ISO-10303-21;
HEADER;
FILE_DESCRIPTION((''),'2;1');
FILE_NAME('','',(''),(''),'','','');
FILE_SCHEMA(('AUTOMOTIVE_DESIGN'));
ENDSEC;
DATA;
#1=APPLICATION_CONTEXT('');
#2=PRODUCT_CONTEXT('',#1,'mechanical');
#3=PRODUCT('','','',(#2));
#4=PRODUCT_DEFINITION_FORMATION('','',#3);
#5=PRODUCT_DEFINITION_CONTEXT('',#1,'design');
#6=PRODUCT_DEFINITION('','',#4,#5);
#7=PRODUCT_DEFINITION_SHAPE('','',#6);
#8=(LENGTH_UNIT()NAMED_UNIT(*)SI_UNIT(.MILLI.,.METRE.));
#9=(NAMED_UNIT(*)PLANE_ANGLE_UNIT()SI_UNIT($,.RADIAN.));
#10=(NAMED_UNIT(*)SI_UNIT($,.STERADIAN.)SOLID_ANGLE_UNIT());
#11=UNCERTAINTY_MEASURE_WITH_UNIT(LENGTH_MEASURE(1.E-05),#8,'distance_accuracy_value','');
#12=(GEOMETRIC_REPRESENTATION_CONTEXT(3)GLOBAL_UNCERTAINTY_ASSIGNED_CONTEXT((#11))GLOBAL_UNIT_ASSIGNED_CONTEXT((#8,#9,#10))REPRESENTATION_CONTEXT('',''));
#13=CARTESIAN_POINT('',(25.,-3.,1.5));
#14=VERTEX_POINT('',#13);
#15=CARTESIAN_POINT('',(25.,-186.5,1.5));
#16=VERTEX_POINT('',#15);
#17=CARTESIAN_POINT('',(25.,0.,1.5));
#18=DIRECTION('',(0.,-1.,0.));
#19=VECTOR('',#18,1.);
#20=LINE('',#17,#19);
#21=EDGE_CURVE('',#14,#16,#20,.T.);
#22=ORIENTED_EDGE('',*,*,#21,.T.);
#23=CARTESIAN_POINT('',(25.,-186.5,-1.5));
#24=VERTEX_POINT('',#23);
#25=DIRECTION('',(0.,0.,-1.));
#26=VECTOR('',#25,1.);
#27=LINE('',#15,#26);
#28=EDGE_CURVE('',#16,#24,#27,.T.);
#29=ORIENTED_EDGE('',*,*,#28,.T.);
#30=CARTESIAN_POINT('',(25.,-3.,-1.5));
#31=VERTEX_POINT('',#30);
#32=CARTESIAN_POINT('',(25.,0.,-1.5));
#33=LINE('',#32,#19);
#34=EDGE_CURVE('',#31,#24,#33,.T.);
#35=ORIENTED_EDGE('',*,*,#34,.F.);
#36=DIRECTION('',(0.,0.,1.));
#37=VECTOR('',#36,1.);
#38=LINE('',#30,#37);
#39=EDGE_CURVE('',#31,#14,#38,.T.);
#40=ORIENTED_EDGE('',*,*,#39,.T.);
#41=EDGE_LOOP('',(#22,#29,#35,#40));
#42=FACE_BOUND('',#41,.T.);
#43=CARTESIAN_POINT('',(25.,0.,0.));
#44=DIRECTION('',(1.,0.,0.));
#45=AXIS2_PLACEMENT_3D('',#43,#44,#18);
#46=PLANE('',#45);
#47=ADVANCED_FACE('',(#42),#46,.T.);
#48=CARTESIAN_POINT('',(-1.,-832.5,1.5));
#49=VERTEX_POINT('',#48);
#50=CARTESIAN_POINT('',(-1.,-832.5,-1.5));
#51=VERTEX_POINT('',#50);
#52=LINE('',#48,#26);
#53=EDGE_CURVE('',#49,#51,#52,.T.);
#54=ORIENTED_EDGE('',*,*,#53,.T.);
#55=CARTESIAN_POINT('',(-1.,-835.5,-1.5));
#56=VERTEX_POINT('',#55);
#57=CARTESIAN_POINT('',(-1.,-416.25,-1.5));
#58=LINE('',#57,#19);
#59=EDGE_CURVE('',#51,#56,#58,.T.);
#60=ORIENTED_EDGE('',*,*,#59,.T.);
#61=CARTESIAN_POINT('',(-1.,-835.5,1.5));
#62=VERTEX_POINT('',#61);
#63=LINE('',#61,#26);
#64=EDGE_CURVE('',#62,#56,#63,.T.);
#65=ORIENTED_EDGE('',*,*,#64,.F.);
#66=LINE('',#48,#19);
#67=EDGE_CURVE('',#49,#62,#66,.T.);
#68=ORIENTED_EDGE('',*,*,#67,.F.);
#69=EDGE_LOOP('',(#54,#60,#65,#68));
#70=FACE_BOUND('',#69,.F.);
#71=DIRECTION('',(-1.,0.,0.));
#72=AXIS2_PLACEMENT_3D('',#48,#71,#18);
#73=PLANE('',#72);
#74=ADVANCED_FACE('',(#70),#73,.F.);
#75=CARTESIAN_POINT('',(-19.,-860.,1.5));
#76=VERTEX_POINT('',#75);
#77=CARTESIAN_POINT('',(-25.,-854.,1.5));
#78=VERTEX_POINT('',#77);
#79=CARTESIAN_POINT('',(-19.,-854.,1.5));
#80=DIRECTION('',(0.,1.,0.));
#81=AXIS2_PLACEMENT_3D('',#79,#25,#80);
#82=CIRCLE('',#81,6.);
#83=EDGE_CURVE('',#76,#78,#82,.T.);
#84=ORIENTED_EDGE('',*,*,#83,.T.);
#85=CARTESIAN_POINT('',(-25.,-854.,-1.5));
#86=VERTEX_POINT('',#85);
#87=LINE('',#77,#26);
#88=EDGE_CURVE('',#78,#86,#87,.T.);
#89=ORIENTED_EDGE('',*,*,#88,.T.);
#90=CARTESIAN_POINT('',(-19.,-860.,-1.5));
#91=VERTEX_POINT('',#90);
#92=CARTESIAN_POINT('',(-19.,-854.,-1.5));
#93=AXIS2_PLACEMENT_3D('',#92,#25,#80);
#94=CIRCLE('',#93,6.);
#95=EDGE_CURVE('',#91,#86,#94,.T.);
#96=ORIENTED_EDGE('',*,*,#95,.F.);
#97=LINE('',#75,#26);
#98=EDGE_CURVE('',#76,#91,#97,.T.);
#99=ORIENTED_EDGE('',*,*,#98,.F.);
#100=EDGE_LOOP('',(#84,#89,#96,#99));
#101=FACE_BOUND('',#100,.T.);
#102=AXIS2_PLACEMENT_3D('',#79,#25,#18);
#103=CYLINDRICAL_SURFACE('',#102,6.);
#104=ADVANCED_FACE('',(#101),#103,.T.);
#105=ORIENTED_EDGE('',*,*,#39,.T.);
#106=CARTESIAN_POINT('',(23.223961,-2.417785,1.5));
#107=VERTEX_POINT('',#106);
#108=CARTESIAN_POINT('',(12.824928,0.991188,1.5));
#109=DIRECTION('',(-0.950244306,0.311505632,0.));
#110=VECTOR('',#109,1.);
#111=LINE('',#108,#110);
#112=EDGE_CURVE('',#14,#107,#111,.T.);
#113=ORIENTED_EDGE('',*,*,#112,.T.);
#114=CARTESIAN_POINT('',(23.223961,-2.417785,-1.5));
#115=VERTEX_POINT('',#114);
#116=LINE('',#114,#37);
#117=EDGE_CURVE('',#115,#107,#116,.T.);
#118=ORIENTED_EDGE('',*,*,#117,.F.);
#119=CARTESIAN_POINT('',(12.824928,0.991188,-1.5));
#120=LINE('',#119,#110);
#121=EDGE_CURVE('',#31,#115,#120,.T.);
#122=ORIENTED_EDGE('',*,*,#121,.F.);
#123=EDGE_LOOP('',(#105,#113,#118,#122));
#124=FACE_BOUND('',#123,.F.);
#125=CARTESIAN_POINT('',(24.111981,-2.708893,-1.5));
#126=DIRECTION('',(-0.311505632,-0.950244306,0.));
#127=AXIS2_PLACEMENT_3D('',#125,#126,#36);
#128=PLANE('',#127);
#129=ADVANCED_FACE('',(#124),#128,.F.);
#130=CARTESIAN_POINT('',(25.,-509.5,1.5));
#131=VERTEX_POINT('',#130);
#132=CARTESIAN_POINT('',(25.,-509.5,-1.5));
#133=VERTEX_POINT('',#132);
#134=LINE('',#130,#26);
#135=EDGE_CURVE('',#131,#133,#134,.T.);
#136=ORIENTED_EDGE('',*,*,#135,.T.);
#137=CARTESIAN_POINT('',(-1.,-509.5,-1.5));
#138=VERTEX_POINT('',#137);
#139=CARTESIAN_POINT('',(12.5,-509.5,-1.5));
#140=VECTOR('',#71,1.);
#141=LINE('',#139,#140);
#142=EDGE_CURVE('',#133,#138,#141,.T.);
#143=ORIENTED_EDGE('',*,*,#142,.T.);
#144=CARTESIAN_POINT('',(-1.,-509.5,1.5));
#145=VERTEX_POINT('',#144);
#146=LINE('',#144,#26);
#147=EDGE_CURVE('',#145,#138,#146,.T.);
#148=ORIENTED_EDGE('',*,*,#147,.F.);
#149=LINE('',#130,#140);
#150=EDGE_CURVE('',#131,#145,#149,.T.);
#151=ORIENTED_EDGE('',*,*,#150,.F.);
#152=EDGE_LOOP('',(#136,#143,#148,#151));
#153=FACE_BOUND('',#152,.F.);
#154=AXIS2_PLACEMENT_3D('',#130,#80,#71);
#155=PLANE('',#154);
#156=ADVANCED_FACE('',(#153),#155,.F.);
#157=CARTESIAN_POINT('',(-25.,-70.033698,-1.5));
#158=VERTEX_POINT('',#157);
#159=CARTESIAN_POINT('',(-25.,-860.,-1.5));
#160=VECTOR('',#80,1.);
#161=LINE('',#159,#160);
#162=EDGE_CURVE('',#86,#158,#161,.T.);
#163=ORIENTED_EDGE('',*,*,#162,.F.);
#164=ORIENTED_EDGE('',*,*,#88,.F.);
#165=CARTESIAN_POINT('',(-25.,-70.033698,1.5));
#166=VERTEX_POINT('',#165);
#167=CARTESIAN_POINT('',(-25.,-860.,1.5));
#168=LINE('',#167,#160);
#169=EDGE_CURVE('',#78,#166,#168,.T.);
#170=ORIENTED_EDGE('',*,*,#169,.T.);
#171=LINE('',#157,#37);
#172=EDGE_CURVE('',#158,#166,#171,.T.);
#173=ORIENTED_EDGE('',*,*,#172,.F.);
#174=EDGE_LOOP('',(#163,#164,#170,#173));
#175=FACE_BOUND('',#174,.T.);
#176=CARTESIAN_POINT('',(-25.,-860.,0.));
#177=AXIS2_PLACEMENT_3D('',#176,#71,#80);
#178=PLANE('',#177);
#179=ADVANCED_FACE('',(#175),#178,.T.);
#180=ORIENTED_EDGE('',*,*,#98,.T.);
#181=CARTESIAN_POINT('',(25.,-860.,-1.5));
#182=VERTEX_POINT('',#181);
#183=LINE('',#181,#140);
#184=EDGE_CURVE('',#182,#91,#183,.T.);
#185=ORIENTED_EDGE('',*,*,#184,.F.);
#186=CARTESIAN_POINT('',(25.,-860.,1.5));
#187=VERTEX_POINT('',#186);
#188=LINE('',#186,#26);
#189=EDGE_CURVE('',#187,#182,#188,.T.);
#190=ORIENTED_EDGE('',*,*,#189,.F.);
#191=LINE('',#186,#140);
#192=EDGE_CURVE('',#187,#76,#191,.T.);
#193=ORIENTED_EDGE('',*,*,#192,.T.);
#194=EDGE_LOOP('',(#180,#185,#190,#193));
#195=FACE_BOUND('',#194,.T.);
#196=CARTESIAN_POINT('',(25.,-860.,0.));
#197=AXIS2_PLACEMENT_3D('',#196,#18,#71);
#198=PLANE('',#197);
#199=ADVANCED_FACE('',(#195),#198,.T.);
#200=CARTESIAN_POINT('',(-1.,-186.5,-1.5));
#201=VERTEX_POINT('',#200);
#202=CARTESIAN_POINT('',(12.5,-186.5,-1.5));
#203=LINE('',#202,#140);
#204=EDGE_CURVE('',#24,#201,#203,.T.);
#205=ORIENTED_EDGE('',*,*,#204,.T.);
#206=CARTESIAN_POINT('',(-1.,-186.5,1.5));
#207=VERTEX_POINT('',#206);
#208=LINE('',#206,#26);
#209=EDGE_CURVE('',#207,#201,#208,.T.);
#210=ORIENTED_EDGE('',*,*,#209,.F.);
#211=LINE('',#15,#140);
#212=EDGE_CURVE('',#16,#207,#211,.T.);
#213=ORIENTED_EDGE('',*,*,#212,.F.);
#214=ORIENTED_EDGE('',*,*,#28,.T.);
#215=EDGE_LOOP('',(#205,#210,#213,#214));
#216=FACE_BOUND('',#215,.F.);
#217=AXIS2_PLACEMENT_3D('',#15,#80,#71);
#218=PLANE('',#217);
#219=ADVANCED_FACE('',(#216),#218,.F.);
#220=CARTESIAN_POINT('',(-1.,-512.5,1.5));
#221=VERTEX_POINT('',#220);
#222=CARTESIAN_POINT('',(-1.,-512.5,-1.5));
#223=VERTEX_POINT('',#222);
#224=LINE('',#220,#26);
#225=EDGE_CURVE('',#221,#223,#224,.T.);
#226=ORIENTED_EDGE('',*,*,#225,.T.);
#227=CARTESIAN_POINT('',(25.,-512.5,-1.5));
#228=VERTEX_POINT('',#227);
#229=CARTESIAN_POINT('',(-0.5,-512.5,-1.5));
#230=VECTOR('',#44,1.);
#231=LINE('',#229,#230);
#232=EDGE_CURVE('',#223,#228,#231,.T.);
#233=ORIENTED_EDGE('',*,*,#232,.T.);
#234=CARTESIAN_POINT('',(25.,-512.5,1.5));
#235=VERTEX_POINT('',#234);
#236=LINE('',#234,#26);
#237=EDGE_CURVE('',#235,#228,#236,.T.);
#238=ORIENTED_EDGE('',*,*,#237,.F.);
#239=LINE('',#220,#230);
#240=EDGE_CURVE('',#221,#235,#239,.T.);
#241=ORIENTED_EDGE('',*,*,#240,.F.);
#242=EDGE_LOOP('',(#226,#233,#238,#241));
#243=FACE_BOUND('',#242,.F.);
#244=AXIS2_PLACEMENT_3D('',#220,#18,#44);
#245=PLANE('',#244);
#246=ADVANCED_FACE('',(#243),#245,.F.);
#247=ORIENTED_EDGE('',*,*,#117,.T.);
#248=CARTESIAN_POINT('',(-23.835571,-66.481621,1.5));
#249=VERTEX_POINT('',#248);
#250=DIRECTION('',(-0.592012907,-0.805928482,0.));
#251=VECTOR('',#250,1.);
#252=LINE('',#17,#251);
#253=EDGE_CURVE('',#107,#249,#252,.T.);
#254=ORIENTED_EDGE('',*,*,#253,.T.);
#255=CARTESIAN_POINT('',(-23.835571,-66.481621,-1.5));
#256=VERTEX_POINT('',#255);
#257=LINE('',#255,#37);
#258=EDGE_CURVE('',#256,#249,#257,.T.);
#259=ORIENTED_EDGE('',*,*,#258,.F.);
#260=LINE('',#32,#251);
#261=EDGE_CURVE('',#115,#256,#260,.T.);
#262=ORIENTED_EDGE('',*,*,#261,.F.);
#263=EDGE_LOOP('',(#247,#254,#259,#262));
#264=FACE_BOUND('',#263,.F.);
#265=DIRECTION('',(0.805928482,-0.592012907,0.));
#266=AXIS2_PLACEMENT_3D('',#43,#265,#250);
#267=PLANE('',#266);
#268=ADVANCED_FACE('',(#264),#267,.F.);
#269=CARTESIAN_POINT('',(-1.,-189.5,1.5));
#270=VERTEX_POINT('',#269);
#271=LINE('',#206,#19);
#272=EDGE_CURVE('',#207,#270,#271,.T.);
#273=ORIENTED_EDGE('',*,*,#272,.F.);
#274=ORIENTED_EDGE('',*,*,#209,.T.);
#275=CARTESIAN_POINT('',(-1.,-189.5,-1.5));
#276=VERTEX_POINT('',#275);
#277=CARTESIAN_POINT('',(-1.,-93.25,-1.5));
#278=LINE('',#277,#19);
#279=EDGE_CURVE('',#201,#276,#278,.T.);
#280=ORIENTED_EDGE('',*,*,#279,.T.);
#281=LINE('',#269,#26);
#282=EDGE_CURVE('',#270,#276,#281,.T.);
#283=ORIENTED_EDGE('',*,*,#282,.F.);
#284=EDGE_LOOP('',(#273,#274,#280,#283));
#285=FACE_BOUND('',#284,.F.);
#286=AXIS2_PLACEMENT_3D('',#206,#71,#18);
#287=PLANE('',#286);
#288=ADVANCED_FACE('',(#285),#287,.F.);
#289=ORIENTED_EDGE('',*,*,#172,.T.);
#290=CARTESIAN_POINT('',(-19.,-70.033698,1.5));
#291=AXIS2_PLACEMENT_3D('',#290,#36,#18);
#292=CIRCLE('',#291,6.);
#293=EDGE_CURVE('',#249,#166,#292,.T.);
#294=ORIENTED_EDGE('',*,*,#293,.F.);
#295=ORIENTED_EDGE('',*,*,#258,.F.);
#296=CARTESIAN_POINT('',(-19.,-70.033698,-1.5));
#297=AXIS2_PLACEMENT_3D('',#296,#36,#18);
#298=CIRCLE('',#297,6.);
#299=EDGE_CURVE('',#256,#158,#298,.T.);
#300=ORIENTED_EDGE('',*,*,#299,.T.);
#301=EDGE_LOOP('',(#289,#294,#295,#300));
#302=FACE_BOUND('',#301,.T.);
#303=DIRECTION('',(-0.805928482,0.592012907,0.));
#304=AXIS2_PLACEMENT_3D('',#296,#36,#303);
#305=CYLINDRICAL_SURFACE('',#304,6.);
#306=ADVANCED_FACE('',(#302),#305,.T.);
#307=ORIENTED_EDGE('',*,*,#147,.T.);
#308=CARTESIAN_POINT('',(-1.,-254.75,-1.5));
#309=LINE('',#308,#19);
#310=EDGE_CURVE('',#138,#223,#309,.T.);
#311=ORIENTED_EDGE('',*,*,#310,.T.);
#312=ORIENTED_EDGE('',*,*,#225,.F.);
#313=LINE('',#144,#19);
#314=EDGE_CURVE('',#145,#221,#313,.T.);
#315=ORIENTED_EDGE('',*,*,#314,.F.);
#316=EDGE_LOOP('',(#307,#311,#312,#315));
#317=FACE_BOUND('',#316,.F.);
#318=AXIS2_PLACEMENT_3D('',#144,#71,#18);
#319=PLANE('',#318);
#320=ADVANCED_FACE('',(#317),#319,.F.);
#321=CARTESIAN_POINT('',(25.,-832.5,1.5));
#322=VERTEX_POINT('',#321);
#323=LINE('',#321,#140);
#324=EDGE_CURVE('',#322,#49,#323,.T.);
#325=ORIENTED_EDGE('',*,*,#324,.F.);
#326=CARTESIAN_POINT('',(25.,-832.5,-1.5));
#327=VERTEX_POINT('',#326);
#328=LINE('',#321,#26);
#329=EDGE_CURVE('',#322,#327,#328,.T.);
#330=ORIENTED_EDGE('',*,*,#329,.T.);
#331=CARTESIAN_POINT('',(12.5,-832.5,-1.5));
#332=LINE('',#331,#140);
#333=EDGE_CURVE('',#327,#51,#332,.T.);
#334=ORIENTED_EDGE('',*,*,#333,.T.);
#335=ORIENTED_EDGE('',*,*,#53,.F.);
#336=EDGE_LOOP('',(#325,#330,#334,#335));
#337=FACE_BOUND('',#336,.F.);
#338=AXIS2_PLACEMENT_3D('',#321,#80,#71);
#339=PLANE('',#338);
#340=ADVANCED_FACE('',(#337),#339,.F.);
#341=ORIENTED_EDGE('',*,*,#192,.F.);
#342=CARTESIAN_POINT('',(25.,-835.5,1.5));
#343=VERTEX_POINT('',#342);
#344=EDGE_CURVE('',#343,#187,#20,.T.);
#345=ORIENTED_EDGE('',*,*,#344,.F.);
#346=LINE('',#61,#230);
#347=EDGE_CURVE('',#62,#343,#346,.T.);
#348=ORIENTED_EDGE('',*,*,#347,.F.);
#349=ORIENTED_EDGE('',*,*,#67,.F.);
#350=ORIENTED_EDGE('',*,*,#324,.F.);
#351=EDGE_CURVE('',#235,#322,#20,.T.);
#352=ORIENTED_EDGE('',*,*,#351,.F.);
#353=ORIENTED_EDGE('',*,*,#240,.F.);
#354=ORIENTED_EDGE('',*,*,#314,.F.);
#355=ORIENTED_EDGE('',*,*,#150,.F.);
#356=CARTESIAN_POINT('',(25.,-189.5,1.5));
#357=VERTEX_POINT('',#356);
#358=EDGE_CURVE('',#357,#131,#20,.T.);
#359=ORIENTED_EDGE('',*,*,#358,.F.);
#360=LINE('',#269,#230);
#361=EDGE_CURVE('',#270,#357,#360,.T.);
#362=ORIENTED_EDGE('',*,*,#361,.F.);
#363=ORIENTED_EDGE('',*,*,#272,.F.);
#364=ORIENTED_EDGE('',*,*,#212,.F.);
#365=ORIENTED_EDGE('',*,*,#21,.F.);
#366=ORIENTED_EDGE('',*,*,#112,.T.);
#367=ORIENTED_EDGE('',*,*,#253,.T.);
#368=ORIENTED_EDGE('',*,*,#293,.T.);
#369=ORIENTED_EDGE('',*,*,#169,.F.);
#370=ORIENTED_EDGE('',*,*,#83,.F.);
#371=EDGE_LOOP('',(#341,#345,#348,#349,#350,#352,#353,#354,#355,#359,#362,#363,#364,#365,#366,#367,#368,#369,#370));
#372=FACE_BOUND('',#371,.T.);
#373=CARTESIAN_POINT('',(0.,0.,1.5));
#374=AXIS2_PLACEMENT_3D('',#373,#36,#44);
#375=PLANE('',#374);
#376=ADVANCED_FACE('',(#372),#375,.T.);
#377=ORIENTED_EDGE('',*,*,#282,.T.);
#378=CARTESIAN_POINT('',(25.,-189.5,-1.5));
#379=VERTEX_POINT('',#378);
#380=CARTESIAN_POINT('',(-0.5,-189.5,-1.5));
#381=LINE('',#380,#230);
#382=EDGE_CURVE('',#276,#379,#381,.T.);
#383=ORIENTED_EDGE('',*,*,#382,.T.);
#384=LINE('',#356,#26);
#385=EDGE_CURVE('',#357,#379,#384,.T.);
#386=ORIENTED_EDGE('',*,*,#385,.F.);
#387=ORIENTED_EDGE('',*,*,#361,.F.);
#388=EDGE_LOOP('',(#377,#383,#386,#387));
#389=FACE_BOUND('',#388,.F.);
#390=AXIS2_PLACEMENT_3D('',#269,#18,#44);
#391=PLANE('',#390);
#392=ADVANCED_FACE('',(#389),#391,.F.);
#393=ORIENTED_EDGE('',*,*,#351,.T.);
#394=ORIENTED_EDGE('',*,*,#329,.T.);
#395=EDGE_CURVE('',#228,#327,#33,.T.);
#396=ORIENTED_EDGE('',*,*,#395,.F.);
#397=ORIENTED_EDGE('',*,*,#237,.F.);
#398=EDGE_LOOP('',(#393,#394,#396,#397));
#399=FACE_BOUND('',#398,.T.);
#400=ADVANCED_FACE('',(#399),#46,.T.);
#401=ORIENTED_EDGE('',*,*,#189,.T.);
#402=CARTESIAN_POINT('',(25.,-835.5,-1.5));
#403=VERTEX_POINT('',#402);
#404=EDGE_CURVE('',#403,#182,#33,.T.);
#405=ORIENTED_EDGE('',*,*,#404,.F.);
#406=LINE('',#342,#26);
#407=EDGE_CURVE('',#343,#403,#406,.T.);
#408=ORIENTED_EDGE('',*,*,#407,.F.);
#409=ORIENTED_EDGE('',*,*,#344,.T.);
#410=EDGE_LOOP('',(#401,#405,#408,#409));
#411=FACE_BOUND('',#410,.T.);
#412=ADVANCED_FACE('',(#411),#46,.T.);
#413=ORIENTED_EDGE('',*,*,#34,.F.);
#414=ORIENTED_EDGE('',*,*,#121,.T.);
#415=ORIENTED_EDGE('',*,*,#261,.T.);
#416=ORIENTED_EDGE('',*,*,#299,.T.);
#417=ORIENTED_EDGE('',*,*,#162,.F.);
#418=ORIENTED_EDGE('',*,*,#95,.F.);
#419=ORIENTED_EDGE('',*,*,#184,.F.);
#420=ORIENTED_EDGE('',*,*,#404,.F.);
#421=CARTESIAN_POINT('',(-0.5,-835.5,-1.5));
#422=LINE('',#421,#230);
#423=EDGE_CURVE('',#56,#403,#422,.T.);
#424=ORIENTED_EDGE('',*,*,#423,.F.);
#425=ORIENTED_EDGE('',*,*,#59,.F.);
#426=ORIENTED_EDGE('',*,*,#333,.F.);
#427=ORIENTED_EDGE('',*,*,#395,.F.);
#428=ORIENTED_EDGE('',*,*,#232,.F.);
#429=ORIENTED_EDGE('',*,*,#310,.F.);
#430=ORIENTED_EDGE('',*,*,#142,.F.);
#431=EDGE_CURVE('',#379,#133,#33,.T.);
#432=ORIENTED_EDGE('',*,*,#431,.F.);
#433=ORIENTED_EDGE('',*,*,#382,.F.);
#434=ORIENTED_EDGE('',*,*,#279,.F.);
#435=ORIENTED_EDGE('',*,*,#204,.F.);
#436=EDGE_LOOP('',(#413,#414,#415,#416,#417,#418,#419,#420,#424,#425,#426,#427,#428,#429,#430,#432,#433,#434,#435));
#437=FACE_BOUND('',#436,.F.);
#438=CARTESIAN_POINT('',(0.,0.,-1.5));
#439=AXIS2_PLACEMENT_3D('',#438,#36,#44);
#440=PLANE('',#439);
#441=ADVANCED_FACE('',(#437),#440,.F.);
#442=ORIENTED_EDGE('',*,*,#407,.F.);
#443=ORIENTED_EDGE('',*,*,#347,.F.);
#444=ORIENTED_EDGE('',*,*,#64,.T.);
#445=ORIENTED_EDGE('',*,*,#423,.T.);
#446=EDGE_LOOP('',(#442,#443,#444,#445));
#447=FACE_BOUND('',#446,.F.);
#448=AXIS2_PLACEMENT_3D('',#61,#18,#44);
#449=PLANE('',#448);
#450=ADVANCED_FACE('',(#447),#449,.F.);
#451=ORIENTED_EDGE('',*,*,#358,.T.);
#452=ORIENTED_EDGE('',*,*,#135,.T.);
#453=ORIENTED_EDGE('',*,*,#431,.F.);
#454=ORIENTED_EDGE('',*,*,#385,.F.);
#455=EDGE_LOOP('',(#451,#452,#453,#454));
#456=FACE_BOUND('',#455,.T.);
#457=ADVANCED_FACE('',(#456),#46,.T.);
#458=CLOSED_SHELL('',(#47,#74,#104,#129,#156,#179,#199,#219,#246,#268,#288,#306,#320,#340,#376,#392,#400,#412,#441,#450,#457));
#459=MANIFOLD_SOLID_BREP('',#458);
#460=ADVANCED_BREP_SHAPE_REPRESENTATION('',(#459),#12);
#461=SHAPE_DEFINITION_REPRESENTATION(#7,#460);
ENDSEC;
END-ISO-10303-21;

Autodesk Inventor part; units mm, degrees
ref_plane "YZ Plane" through (0, 0, 0) normal (1, 0, 0) x (0, 1, 0)
ref_plane "XZ Plane" through (0, 0, 0) normal (0, 1, 0) x (-1, 0, 0)
ref_plane "XY Plane" through (0, 0, 0) normal (0, 0, 1) x (1, 0, 0)
sketch "Sketch1" plane through (0, 0, 0) normal (0, 0, 1) x (1, 0, 0)
  line L0 (-25, 0) -> (25, 0)
  line L1 (25, 0) -> (25, -860)
  line L2 (25, -860) -> (-25, -860)
  line L3 (-25, -860) -> (-25, 0)
  line L4 (25, 0) -> (-25, -68.0668)
  point P0 (0, 0)
  point P1 (0, 0)
  point P2 (25, -1153.2713)
  dimension "d0" = 50
  dimension "d1" = 860
  dimension "d6" = 53.7
extrude "Plate1" add sketch "Sketch1" along normal mid plane 3 contours L1 L2 L3 L4
chamfer "Corner Chamfer2" distance 3 angle 45 1 edges at (25, 0, 0)
fillet "Corner Round1" radius 6 1 edges at (-25, -68.0668, 0)
sketch "Sketch2" plane through (0, 0, 1.5) normal (0, 0, 1) x (1, 0, 0)
  line L0 (25, -186.5) -> (-1, -186.5)
  line L1 (-1, -186.5) -> (-1, -189.5)
  line L2 (-1, -189.5) -> (25, -189.5)
  line L3 (25, -189.5) -> (25, -186.5)
  line L4 (25, -3) -> (25, -860) projected
  point P0 (0, 0)
  point P1 (25, -188)
  point P2 (25, -827)
  dimension "d15" = 188
  dimension "d16" = 26
  dimension "d17" = 3
extrude "Extrusion1" cut sketch "Sketch2" against normal through all
pattern_linear "Rectangular Pattern1" count 3 spacing 323 along (0, -1, 0) of "Extrusion1"
fillet "Corner Round3" radius 6 1 edges at (-25, -860, 0)
sketch "Sketch3" plane through (0, 0, -1.5) normal (0, 0, -1) x (-1, 0, 0)
  line L0 (-4.7159, -271.7572) -> (4.3119, -271.7572) construction
  line L1 (4.3119, -271.7572) -> (4.3119, -401.2704) construction
  line L2 (4.3119, -401.2704) -> (-4.7159, -401.2704) construction
  line L3 (-4.7159, -401.2704) -> (-4.7159, -271.7572) construction
  point P0 (0, 0)
mark "Mark1"
equation "\"d6\" = d5"
equation "\"d2\" = Thickness"
equation "\"BendReliefWidth\" = Thickness"
equation "\"BendReliefDepth\" = 0.5 * Thickness"
equation "\"CornerReliefSize\" = 4 * Thickness"
equation "\"MinimumRemnant\" = 2 * Thickness"
equation "\"TransitionRadius\" = BendRadius"
equation "\"JacobiRadiusSize\" = BendRadius"
equation "\"GapSize\" = Thickness"
equation "\"d5\" = 53.7deg"
equation "\"Thickness\" = 3"
equation "\"BendRadius\" = 5"
properties part number "MSC 603 STRINGER CONE EXIT BACK" material "Stainless Steel"
